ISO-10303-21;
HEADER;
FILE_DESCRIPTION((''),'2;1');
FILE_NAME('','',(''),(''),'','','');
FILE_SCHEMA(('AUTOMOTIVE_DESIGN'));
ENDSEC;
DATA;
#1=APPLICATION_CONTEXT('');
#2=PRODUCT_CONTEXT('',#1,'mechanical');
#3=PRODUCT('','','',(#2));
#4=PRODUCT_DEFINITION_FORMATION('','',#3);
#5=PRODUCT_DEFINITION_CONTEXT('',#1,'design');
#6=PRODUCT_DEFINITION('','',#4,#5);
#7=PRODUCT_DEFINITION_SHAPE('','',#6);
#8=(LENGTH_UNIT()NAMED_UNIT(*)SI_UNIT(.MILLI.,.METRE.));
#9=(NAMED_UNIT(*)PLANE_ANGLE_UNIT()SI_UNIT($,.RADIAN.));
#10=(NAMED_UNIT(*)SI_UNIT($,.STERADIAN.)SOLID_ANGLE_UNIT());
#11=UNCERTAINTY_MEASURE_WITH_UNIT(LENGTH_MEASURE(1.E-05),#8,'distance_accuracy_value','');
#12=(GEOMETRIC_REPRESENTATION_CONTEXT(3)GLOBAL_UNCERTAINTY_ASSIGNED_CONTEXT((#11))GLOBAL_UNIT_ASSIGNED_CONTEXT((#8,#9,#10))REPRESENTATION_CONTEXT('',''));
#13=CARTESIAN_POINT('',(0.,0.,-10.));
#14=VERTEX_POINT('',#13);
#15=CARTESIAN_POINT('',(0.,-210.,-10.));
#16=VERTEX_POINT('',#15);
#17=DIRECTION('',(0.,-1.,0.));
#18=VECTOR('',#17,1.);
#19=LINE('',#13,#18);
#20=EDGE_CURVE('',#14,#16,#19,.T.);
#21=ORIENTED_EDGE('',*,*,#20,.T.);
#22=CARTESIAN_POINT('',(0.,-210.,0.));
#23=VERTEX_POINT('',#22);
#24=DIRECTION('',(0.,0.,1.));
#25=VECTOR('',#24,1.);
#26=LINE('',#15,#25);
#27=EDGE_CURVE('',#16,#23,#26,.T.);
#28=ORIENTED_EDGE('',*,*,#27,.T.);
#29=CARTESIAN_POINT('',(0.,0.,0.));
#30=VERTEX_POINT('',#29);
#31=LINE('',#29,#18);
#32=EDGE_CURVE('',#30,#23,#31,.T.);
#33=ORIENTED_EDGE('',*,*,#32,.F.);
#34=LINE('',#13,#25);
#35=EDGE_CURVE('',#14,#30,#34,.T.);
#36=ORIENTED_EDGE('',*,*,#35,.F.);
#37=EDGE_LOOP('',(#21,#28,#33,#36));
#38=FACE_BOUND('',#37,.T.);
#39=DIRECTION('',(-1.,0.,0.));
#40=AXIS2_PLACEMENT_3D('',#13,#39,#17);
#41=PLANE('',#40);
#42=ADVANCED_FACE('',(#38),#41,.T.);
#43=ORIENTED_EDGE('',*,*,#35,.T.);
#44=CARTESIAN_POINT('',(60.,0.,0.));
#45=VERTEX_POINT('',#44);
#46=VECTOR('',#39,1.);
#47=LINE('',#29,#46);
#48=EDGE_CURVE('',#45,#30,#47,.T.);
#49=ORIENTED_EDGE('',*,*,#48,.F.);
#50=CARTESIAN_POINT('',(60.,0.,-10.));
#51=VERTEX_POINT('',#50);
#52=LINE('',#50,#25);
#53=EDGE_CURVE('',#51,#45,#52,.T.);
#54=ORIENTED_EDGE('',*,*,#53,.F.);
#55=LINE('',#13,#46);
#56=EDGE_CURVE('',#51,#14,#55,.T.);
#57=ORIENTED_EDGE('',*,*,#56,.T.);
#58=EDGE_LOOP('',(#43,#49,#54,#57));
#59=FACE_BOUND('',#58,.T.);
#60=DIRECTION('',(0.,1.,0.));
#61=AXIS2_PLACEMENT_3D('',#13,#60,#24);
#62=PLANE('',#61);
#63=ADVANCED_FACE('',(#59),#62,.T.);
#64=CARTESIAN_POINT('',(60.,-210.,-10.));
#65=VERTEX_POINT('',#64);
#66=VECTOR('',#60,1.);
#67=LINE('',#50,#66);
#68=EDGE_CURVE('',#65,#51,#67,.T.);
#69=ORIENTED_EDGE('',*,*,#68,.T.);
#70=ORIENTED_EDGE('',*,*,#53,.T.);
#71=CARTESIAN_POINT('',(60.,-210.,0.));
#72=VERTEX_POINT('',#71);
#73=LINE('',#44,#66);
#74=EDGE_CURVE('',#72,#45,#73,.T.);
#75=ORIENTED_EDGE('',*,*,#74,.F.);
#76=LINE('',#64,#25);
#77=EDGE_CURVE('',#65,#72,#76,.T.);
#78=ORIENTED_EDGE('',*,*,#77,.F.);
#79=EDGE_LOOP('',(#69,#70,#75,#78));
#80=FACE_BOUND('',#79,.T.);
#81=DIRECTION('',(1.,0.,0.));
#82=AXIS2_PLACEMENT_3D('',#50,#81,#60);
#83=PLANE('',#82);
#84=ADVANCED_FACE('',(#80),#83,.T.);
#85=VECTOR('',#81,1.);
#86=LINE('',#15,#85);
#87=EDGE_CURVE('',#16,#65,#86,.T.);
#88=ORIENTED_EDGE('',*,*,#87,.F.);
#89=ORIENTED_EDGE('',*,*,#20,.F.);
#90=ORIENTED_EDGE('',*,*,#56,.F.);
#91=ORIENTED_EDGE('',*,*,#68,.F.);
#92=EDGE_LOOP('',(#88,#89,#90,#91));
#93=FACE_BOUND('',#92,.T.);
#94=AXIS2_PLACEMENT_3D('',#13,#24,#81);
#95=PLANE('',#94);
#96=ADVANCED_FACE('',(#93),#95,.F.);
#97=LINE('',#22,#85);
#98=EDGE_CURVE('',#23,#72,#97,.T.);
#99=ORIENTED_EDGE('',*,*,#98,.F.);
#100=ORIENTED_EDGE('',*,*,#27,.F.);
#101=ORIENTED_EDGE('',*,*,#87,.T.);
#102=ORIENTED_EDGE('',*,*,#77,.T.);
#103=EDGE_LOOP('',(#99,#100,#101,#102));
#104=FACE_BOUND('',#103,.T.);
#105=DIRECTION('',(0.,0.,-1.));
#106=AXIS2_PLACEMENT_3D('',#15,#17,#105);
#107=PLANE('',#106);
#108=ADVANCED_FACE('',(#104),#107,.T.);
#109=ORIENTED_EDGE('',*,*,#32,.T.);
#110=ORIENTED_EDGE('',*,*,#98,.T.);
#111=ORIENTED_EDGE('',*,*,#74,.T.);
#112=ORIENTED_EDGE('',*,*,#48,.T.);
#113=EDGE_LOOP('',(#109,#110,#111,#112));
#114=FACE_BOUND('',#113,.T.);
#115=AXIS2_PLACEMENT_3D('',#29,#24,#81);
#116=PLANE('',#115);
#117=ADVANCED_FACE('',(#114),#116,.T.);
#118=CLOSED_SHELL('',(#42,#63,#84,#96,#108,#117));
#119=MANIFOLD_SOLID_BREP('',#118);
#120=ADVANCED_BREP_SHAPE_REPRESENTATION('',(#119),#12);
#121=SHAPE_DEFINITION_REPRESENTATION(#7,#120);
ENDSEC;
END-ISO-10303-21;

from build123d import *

# Parameters (mm, degrees)
SKETCH_1_W             = 60
SKETCH_1_H             = 210
SM_BASE_FLANGE_1_DEPTH = 10


# Sheet-metal steps are written as plain solids
with BuildPart() as part:
    # Sketch 1 → Базовая кромка1 (new body)
    with BuildSketch(Plane.XY):
        with Locations((30, -105)):
            Rectangle(SKETCH_1_W, SKETCH_1_H)
    extrude(amount=-SM_BASE_FLANGE_1_DEPTH)


solid = part.part
